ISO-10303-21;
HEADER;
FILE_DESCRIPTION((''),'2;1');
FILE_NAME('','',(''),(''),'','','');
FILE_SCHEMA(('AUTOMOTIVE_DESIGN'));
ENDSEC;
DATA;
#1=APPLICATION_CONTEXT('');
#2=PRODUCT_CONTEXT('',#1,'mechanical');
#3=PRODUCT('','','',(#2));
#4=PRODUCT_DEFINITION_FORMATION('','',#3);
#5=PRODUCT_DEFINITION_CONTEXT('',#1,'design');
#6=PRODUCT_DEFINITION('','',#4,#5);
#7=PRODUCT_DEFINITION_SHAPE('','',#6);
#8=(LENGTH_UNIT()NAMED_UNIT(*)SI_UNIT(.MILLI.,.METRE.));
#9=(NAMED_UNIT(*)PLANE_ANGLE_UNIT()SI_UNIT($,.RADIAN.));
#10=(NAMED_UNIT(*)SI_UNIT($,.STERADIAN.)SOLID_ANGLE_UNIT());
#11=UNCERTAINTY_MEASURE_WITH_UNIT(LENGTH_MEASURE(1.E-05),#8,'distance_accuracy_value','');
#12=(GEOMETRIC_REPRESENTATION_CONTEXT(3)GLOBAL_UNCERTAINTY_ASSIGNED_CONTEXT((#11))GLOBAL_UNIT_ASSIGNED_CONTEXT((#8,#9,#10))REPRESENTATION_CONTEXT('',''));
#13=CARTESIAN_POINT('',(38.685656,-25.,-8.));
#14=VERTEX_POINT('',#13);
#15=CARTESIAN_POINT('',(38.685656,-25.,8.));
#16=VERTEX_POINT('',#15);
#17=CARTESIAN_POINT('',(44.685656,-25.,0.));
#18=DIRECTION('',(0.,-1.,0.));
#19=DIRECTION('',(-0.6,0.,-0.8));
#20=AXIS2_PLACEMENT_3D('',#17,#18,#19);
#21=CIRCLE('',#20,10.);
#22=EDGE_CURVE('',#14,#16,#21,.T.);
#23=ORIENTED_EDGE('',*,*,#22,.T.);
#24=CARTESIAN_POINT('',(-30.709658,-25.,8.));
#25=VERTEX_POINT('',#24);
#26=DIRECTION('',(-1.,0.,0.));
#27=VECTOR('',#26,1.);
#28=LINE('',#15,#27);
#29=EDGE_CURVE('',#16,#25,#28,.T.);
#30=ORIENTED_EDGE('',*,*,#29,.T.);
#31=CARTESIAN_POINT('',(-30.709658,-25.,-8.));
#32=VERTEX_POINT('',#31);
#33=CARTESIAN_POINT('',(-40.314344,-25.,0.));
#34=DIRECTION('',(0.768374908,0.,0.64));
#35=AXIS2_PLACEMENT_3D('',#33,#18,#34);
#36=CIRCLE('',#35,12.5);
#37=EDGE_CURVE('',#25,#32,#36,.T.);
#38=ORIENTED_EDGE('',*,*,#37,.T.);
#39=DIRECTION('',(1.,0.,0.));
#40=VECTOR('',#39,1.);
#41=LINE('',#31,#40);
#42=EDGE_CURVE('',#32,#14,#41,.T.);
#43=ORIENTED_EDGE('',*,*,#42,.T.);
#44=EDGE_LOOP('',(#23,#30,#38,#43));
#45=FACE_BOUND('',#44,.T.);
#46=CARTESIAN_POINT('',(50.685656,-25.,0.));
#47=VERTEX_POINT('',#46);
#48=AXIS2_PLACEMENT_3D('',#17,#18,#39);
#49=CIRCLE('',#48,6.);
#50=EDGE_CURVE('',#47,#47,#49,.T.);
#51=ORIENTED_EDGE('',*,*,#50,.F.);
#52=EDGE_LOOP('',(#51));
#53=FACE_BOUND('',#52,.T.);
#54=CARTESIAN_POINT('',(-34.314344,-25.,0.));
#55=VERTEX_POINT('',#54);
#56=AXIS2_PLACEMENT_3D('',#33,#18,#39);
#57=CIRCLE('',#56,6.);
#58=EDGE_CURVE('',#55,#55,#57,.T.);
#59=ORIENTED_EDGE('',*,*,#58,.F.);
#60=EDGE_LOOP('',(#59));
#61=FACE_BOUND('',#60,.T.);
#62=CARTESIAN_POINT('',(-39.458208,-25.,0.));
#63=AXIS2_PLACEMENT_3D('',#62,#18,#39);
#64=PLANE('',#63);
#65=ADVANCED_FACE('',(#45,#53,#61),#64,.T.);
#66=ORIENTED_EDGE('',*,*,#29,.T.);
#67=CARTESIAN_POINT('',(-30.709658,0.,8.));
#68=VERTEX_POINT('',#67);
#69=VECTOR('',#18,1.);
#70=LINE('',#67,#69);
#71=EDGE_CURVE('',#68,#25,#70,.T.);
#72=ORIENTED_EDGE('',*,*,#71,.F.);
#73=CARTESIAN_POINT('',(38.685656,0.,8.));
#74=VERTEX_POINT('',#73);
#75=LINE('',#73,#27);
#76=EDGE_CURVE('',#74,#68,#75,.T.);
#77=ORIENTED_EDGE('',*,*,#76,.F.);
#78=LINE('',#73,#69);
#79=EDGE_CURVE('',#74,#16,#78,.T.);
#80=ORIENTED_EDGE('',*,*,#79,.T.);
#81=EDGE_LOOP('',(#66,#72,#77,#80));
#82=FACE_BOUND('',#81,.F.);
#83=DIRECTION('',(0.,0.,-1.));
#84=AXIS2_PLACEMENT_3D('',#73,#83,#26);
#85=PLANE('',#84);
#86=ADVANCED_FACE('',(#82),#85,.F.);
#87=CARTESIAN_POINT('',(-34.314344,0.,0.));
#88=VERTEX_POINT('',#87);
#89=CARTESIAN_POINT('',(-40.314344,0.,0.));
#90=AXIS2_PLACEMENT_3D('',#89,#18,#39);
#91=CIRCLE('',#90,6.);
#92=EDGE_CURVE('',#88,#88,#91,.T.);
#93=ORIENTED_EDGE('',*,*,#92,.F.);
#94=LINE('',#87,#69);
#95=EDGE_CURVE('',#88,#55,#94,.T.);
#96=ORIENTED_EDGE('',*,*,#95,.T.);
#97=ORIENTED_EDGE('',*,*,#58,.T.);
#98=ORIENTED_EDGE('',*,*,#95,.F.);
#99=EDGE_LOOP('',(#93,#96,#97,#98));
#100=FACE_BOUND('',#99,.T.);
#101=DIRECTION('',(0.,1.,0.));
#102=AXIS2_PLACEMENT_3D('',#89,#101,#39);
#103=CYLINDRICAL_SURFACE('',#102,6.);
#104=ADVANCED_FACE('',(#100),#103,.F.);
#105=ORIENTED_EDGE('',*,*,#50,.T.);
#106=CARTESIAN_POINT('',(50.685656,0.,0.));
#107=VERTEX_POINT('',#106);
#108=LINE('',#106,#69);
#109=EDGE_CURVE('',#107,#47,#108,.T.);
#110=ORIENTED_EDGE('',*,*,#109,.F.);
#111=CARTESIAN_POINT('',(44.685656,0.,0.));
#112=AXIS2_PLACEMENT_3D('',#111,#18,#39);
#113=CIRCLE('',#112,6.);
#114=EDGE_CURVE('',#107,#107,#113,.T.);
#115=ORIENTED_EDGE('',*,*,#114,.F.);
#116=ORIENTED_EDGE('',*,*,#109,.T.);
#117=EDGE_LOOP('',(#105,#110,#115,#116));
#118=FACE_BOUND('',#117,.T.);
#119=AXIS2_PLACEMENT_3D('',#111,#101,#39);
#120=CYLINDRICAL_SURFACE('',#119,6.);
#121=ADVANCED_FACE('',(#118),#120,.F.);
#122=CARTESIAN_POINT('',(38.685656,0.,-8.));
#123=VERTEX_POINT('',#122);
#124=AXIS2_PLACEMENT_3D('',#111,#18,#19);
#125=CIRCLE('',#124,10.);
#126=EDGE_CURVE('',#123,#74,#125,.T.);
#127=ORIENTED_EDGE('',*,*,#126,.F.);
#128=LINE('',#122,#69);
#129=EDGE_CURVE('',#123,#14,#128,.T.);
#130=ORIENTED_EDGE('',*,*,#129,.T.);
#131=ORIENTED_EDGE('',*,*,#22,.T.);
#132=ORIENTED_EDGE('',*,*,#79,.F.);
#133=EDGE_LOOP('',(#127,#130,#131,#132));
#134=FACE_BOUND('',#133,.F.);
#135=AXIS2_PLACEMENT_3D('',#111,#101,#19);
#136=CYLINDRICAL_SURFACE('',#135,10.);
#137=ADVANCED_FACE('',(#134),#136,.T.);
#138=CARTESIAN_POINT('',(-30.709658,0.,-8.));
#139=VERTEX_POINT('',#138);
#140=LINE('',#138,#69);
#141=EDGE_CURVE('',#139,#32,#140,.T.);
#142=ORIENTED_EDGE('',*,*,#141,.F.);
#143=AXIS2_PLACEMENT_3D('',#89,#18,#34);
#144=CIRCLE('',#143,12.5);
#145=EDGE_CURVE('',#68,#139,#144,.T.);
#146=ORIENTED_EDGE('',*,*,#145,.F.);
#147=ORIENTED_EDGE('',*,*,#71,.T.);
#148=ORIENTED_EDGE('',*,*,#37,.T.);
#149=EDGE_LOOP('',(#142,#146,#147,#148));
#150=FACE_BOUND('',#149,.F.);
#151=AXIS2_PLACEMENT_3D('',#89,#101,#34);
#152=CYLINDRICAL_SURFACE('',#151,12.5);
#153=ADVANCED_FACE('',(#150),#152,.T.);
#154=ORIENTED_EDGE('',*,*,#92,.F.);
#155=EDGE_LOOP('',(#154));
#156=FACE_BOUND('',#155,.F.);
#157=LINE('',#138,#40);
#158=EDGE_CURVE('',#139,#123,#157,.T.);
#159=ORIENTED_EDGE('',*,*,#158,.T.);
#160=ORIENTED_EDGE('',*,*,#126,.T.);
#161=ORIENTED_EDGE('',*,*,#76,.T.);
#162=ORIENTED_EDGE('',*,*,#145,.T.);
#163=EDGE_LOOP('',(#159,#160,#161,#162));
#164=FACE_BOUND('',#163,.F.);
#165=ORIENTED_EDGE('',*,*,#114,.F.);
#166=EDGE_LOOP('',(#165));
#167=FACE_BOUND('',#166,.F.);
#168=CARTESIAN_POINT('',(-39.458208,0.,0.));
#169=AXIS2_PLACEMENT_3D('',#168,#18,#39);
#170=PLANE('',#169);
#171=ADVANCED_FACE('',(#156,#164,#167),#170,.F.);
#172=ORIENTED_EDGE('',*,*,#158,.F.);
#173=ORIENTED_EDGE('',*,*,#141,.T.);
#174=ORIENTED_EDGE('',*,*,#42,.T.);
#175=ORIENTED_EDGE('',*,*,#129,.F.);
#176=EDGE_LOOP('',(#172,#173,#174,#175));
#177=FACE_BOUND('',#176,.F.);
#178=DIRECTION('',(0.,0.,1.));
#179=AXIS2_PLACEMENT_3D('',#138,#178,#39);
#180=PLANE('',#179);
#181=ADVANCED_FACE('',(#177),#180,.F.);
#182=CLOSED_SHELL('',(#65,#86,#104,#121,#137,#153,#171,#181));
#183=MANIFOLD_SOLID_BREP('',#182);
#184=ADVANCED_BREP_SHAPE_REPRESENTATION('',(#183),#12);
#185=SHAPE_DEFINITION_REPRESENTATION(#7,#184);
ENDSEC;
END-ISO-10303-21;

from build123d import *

# Parameters (mm, degrees)
F0_R     = 6
F1_DEPTH = 25


# Not quite as in the source:
# - a feature of the source that left no trace in its solid (it failed there, or was rolled back) is left out


with BuildPart() as f1:
    # F0 (on Front) → F1 (new body)
    with BuildSketch(Plane.XZ):
        with BuildLine():
            ThreePointArc((-30.7096580903, -8), (-28.5604391496, -4.2539052968), (-27.8143444464, 0))
            ThreePointArc((-27.8143444464, 0), (-28.5604391496, 4.2539052968), (-30.7096580903, 8))
            ThreePointArc((-30.7096580903, 8), (-52.8143444464, 0), (-30.7096580903, -8))
        make_face()
        with Locations((-40.3143444464, 0)):
            Circle(F0_R, mode=Mode.SUBTRACT)
        with BuildLine():
            ThreePointArc((-30.7096580903, 8), (-28.5604391496, 4.2539052968), (-27.8143444464, 0))
            ThreePointArc((-27.8143444464, 0), (-28.5604391496, -4.2539052968), (-30.7096580903, -8))
            Line((-30.7096580903, -8), (38.6856555536, -8))
            ThreePointArc((38.6856555536, -8), (34.6856555536, 0), (38.6856555536, 8))
            Line((38.6856555536, 8), (-30.7096580903, 8))
        make_face()
        with BuildLine():
            ThreePointArc((54.6856555536, 0), (49.1577915086, 8.94427191), (38.6856555536, 8))
            ThreePointArc((38.6856555536, 8), (34.6856555536, 0), (38.6856555536, -8))
            ThreePointArc((38.6856555536, -8), (49.1577915086, -8.94427191), (54.6856555536, 0))
        make_face()
        with Locations((44.6856555536, 0)):
            Circle(F0_R, mode=Mode.SUBTRACT)
    extrude(amount=F1_DEPTH)


solid = f1.part
